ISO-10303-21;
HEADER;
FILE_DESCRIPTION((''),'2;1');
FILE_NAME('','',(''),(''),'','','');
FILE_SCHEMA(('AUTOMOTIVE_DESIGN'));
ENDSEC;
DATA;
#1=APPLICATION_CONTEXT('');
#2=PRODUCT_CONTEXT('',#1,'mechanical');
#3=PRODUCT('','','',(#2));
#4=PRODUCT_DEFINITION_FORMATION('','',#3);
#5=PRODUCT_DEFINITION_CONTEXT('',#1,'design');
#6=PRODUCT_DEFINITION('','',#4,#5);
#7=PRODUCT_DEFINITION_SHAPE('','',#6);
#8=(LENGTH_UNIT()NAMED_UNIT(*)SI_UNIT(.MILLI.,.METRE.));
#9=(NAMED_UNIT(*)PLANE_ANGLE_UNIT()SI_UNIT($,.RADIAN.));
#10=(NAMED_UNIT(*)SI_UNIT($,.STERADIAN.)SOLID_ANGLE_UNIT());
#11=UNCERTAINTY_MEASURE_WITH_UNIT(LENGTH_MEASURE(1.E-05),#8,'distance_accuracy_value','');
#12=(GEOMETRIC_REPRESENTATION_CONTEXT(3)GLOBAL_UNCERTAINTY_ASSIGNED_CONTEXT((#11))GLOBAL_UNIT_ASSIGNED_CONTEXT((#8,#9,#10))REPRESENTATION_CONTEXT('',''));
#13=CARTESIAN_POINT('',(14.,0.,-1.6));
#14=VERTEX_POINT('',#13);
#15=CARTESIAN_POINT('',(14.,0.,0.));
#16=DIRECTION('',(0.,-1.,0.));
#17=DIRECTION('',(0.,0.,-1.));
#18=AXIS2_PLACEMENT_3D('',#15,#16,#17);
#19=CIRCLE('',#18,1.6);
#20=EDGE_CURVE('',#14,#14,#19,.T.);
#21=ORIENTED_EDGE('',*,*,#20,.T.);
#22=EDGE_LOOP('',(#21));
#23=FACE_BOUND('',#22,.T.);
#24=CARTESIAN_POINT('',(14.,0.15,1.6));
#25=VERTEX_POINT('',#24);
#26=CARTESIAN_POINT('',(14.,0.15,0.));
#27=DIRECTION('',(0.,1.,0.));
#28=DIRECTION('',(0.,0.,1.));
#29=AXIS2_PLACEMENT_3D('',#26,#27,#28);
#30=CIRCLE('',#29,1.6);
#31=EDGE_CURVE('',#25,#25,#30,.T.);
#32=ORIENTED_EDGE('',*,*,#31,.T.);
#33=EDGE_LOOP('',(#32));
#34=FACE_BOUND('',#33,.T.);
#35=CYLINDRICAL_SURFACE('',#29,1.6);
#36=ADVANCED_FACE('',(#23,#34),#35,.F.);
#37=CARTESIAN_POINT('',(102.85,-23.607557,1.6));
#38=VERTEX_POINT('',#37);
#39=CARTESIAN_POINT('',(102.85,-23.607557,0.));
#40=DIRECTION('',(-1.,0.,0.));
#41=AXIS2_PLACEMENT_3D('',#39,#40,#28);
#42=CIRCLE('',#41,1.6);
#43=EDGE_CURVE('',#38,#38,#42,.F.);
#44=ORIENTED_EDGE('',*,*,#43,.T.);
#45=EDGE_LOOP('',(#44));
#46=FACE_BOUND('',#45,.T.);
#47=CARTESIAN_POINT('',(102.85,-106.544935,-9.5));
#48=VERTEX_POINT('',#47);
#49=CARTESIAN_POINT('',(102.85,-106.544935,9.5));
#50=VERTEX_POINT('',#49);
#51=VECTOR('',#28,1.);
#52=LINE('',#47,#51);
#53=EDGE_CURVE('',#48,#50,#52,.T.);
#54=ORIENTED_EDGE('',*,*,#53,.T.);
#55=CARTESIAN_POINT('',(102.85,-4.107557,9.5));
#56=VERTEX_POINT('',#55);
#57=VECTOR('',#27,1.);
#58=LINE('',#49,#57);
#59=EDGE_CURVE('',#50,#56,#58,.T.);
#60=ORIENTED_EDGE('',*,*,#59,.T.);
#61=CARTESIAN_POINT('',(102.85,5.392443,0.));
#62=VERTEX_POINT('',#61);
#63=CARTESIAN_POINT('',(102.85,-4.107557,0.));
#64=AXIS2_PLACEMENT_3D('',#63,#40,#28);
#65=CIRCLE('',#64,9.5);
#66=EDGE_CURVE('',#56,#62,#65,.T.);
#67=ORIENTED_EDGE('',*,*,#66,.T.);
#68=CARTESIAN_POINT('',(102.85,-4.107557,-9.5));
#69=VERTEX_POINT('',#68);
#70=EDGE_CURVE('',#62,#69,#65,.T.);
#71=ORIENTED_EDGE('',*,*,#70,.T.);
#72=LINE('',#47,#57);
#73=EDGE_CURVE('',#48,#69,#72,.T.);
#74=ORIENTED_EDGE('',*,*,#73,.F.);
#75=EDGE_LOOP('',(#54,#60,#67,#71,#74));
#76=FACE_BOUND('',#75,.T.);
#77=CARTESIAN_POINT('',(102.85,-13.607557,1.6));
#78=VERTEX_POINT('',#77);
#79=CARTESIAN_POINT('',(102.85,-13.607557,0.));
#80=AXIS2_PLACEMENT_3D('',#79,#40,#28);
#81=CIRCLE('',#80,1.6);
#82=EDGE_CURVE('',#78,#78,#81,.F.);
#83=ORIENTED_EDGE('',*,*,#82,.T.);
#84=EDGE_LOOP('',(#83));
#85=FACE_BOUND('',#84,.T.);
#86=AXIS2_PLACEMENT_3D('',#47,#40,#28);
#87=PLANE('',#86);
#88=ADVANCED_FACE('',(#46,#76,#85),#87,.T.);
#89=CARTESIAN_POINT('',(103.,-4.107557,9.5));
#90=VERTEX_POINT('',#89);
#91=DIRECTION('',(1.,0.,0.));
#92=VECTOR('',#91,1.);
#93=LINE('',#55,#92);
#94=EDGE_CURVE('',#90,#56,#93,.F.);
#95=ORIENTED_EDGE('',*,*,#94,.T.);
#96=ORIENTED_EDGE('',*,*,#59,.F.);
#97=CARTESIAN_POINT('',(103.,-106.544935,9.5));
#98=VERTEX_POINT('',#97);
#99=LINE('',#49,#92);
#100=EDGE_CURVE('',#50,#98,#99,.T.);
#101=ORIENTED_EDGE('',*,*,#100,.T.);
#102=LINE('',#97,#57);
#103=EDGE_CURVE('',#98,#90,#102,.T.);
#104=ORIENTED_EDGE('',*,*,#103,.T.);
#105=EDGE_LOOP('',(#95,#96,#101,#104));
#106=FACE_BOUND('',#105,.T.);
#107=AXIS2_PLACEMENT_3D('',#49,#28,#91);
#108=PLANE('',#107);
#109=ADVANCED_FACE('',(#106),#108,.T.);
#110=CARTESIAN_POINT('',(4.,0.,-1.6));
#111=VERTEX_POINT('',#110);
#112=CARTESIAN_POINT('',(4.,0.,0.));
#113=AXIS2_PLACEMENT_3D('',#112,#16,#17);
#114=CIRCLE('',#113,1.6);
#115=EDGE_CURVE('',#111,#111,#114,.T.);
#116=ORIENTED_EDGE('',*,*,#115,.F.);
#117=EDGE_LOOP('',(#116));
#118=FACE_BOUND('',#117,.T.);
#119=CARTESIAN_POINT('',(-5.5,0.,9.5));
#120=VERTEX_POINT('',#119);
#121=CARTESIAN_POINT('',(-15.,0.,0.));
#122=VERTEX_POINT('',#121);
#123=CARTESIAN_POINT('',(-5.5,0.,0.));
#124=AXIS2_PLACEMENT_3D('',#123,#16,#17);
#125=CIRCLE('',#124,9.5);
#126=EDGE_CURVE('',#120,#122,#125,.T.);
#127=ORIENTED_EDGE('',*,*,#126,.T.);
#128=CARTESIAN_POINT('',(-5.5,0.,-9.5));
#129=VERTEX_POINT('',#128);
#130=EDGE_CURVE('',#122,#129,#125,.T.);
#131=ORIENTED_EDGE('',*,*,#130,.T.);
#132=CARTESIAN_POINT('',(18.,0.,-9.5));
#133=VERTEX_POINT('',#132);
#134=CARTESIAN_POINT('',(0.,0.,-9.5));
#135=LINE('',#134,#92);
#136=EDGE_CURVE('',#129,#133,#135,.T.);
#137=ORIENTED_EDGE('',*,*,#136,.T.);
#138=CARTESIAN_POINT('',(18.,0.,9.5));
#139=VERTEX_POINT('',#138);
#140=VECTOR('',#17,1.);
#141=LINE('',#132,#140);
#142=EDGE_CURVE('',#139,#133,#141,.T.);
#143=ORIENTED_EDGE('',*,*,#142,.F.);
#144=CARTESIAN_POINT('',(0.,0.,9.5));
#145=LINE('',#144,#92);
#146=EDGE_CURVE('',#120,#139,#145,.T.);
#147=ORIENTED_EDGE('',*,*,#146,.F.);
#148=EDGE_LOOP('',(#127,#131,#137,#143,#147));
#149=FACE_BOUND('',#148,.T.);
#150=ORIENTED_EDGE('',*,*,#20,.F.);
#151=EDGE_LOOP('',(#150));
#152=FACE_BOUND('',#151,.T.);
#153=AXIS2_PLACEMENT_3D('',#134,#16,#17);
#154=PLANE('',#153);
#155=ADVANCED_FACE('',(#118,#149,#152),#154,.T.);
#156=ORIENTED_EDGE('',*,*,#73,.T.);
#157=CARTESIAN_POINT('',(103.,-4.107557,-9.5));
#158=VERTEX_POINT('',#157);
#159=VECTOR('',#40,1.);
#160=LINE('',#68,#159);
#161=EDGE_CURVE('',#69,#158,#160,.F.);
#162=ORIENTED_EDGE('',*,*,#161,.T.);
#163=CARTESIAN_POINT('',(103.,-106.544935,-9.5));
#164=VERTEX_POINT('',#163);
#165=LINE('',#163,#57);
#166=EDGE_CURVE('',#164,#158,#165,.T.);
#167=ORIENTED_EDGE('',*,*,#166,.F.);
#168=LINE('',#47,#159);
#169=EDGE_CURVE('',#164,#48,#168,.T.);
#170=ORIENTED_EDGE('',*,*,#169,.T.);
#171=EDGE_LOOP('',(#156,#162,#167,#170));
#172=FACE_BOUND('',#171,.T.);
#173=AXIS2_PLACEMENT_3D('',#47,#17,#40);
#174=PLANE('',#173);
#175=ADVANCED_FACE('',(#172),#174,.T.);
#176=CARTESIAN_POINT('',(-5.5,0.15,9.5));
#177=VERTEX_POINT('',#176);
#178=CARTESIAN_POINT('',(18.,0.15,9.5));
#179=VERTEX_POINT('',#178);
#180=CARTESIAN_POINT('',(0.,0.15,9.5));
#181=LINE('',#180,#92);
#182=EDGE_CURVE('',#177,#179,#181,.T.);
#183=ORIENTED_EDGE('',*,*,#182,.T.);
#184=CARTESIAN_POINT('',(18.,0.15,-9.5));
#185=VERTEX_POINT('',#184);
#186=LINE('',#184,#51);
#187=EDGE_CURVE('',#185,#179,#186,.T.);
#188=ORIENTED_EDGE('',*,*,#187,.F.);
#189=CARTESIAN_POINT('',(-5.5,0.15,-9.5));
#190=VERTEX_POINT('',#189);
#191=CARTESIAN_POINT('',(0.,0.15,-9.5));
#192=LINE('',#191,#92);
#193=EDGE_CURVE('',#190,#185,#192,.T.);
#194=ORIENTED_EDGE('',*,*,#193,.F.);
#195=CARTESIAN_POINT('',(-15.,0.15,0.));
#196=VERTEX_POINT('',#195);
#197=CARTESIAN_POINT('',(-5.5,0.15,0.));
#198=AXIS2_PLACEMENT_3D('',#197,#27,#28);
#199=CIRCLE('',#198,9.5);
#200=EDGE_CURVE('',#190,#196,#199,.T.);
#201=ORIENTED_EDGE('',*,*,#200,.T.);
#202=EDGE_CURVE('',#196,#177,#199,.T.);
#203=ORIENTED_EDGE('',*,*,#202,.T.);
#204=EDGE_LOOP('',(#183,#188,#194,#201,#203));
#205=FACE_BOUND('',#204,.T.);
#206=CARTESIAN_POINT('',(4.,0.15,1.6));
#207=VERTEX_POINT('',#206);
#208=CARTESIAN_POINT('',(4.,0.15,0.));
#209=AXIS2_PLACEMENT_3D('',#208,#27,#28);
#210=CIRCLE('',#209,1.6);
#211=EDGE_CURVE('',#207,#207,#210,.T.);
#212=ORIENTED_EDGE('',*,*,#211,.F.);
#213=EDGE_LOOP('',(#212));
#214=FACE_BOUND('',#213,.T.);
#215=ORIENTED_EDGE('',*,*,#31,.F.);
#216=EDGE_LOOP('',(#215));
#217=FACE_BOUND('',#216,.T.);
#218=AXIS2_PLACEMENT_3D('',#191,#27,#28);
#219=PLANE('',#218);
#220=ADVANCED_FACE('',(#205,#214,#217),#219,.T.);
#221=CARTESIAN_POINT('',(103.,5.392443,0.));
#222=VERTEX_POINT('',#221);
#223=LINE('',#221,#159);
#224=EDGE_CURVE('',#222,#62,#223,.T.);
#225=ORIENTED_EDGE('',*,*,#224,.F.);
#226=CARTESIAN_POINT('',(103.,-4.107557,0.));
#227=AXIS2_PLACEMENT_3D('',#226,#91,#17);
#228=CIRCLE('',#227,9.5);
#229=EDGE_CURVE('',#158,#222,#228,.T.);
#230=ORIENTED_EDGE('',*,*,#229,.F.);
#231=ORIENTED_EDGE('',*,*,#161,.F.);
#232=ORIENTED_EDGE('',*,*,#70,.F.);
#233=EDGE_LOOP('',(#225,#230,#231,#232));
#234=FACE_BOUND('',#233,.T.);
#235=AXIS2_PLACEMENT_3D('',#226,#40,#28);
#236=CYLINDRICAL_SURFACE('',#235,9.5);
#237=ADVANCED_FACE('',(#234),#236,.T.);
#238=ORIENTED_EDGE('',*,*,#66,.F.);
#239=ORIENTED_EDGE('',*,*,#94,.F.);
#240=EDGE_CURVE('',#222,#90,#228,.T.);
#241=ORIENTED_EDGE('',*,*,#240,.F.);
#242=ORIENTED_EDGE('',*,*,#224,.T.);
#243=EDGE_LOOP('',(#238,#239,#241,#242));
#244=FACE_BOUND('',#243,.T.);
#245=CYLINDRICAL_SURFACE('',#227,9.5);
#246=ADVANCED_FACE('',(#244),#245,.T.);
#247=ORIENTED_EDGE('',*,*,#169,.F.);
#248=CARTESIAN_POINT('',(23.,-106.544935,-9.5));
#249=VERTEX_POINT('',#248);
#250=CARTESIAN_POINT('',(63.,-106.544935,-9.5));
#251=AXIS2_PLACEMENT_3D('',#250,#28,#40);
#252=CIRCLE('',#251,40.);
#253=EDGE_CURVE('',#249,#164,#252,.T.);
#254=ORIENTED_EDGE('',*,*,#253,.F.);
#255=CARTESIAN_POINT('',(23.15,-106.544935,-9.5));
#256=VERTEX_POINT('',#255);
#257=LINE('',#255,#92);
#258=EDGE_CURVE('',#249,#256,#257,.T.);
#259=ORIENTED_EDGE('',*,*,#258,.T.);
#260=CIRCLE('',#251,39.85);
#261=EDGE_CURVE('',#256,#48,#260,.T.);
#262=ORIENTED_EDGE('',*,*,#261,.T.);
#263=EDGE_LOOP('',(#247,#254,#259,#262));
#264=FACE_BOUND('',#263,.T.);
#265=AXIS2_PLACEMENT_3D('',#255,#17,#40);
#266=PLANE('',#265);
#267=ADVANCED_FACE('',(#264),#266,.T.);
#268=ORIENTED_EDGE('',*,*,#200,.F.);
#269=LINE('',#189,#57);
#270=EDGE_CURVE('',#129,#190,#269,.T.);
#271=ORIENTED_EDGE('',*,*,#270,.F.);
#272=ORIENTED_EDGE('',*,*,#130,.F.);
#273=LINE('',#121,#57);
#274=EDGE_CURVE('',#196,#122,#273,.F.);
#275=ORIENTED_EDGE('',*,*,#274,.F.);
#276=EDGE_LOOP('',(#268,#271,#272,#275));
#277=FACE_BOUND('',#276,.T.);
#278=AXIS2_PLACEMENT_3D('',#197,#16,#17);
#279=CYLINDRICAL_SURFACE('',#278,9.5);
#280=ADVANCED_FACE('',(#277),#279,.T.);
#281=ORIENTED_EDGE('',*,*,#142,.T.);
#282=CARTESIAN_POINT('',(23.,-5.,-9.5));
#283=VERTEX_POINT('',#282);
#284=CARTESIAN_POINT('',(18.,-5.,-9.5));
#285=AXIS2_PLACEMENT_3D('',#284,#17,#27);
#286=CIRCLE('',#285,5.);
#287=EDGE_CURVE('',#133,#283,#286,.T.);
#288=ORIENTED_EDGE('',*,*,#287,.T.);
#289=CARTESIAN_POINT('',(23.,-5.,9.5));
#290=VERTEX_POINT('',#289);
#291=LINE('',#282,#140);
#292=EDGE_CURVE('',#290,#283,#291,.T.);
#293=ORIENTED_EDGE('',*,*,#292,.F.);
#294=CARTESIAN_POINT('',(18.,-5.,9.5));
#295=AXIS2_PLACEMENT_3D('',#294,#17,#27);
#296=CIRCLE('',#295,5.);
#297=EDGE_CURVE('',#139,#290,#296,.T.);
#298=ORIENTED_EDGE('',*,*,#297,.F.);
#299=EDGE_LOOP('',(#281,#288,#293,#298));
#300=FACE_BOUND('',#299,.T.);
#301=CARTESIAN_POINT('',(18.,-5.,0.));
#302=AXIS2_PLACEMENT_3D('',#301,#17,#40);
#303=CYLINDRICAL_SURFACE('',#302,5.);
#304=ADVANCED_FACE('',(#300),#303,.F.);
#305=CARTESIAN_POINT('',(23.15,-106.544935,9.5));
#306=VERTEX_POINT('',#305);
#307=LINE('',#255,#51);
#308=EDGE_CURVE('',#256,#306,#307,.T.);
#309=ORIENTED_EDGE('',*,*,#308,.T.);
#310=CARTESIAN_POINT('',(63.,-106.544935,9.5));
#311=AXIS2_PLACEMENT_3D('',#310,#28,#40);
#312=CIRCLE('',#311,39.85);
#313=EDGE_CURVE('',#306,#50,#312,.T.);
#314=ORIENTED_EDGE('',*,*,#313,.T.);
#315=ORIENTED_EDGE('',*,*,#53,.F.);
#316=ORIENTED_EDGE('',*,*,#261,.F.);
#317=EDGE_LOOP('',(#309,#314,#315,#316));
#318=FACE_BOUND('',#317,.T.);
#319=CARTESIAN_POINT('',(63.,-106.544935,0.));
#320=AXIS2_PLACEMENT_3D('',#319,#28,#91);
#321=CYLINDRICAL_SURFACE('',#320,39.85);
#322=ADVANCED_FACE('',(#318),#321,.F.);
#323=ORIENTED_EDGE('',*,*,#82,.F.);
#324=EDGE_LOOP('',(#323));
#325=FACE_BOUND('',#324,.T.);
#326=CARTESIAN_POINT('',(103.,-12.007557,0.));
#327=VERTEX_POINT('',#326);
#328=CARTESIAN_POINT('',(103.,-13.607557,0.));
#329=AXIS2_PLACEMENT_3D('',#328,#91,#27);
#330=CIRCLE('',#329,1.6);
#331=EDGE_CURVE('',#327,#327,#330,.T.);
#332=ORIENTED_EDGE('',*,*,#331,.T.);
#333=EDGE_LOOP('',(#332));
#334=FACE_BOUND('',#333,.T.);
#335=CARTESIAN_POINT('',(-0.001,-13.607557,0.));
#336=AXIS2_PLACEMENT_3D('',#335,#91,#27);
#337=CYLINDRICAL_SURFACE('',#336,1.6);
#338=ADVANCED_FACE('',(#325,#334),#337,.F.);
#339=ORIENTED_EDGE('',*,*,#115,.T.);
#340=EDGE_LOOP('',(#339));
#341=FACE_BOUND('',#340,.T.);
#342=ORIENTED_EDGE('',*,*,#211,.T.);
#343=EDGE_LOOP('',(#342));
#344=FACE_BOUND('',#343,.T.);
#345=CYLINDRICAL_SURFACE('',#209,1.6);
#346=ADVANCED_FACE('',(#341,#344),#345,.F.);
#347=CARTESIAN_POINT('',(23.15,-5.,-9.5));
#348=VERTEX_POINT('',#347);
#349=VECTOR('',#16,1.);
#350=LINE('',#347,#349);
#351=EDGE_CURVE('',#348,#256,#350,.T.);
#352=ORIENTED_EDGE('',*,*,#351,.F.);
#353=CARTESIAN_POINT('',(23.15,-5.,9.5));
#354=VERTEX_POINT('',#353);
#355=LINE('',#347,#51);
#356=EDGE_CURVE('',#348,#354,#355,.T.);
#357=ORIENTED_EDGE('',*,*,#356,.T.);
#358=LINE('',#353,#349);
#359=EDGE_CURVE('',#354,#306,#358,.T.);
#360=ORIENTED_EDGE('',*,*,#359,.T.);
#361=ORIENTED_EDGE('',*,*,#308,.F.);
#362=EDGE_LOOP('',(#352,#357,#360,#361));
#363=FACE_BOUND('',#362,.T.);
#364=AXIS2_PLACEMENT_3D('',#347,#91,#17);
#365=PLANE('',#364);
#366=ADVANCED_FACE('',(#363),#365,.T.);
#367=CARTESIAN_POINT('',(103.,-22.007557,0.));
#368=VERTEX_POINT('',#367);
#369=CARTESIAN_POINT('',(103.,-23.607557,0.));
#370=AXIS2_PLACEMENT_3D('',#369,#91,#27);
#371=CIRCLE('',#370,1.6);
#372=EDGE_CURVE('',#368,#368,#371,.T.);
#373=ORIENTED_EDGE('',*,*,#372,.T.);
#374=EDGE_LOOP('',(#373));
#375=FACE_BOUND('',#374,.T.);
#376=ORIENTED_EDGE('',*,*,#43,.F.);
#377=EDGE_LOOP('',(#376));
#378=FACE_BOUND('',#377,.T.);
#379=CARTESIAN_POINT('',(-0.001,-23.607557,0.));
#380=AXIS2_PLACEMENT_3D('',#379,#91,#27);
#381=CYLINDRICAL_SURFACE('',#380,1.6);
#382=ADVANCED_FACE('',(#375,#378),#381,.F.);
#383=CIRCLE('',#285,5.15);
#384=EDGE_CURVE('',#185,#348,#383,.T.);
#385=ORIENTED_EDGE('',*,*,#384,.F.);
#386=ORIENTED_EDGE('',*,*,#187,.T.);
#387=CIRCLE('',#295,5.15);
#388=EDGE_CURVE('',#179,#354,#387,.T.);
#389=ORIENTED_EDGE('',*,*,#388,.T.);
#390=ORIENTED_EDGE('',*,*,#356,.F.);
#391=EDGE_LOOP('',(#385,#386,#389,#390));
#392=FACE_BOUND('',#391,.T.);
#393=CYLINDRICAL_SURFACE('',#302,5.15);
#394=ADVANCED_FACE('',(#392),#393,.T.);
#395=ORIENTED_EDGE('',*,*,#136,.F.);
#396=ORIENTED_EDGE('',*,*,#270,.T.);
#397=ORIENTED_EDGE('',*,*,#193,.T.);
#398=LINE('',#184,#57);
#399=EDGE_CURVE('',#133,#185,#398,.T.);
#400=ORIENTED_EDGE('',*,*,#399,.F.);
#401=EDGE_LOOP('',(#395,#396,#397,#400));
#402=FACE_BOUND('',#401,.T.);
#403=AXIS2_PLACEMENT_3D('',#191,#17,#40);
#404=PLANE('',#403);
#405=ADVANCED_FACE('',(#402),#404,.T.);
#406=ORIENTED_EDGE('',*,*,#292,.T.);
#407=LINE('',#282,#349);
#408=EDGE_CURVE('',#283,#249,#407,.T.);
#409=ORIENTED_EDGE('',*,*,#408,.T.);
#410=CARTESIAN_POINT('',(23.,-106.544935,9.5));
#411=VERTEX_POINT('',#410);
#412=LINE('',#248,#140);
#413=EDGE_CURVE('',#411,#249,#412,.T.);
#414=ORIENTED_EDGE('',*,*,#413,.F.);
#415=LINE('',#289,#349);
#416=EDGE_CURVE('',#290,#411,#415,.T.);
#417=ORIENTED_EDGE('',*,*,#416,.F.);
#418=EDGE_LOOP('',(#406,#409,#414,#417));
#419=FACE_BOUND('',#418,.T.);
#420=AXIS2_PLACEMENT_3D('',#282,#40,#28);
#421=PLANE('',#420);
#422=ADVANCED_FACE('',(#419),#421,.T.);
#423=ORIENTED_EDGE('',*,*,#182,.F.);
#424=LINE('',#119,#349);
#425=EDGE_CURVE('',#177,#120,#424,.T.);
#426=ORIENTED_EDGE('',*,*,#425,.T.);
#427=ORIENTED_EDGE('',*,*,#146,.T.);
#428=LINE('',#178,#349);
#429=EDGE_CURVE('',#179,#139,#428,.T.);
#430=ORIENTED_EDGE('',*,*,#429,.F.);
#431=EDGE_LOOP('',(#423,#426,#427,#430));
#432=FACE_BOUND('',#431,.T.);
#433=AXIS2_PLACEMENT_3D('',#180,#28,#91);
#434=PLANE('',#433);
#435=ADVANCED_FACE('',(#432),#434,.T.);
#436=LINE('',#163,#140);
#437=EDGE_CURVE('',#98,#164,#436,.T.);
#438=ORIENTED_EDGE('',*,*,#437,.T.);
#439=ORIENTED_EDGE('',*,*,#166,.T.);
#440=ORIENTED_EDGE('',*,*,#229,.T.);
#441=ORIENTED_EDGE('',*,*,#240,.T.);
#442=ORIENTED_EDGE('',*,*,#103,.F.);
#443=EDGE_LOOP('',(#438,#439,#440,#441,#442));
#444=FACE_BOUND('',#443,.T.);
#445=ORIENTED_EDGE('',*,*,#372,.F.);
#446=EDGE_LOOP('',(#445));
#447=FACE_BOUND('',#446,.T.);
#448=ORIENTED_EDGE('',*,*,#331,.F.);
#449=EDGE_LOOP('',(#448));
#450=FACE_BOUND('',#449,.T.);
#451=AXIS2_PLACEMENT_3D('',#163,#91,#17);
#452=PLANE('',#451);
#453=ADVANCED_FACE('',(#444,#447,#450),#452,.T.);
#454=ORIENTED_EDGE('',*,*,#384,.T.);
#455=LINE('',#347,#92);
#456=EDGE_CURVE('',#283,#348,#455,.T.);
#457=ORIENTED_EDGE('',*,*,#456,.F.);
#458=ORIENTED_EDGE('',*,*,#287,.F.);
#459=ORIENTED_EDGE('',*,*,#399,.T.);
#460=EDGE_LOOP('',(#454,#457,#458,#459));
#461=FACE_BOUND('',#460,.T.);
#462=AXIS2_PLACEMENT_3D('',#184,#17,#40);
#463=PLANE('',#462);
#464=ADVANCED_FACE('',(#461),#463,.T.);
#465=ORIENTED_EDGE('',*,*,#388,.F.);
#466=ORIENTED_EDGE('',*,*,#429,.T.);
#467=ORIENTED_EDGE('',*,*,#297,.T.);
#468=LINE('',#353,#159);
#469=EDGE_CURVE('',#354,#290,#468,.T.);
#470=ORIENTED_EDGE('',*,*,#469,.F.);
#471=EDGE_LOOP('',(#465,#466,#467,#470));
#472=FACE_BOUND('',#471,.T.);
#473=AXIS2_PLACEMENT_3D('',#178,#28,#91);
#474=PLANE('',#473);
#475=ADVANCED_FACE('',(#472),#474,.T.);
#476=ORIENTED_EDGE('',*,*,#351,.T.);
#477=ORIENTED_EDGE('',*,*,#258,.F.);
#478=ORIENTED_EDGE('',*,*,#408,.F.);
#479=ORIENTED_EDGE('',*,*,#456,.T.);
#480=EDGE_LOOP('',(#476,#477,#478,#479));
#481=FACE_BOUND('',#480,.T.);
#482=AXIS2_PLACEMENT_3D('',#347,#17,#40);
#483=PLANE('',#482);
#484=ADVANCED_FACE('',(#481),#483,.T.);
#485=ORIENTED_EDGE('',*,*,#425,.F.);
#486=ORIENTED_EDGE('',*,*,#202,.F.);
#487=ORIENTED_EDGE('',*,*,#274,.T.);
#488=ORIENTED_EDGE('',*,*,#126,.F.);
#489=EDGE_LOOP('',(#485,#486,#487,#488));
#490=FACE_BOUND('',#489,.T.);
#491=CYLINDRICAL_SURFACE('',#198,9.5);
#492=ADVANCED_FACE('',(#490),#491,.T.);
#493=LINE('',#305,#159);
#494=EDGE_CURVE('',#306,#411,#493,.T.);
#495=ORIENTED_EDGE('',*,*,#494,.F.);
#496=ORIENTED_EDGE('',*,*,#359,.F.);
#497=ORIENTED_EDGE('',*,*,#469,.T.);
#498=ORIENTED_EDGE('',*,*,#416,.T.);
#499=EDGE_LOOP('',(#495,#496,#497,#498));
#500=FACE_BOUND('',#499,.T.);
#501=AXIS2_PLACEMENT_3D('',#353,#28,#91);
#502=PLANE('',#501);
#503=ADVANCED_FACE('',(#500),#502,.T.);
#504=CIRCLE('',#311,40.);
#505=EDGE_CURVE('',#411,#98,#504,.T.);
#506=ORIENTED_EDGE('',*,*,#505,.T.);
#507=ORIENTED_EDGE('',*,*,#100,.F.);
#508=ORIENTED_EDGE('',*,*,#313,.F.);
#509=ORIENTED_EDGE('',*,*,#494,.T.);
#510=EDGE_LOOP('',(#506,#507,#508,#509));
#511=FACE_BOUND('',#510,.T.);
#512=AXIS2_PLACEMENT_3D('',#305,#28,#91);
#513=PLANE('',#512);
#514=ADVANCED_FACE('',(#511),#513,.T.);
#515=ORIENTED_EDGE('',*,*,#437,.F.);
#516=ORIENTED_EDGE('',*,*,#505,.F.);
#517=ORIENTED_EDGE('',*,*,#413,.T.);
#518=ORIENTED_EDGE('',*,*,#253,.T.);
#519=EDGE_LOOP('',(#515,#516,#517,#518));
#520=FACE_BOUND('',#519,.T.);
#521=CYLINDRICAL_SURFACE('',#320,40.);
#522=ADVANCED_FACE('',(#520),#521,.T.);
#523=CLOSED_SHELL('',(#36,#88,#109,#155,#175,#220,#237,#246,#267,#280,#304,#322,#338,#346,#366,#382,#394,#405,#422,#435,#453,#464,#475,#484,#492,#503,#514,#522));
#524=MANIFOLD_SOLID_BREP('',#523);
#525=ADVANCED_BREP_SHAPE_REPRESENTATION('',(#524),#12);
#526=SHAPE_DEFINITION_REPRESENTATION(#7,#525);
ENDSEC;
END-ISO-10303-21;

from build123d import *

# Parameters (mm, degrees)
SKETCH2_W            = 19
SKETCH2_H            = 0.15
M3_CLEARANCE_HOLE1_D = 3.2
CUT_EXTRUDE1_REACH   = 181.373
SKETCH5_R            = 1.6
MOVE_FACE1_BY        = 15
MOVE_FACE1_2_BY      = 15
FILLET1_R            = 9.5


with BuildPart() as part:
    # Sweep1: sweep along a path in tape_measure_path
    with BuildLine(Plane.XY) as sweep1_path:
        Line((0, 0), (18, 0))
        ThreePointArc((18, 0), (21.535533906, -1.464466094), (23, -5))
        Line((23, -5), (23, -106.544934808))
        ThreePointArc((23, -106.544934808), (63, -146.544934808), (103, -106.544934808))
        Line((103, -106.544934808), (103, -9.607557393))
    # Sketch2 → Sweep1 (sweep)
    with BuildSketch(Plane(origin=(0, 0, 0), x_dir=(0, 0, -1), z_dir=(1, 0, 0))):
        with Locations((0, 0.075)):
            Rectangle(SKETCH2_W, SKETCH2_H)
    sweep(path=sweep1_path.line)

    # M3 Clearance Hole1 (through all)
    with Locations(Plane(origin=(0, 0.15, 0), x_dir=(1, 0, 0), z_dir=(0, 1, 0))):
        with Locations((4, 0), (14, 0)):
            Hole(M3_CLEARANCE_HOLE1_D / 2)

    # Sketch5 → Cut-Extrude1 (cut, up to next)
    with BuildSketch(Plane(origin=(103, 0, 0), x_dir=(0, 0, -1), z_dir=(1, 0, 0)), mode=Mode.PRIVATE) as cut_extrude1_sk1:
        with Locations(Location((0, -13.607557393, 0), (0, 0, 90))):
            Circle(SKETCH5_R)
    cut_extrude1_tool1 = extrude(cut_extrude1_sk1.sketch, amount=-CUT_EXTRUDE1_REACH, mode=Mode.PRIVATE) & part.part
    # Sketch5 → Cut-Extrude1 (cut, up to next)
    with BuildSketch(Plane(origin=(103, 0, 0), x_dir=(0, 0, -1), z_dir=(1, 0, 0)), mode=Mode.PRIVATE) as cut_extrude1_sk2:
        with Locations(Location((0, -23.607557393, 0), (0, 0, 90))):
            Circle(SKETCH5_R)
    cut_extrude1_tool2 = extrude(cut_extrude1_sk2.sketch, amount=-CUT_EXTRUDE1_REACH, mode=Mode.PRIVATE) & part.part
    add(cut_extrude1_tool1.solids().sort_by_distance((103, -13.607557, 0))[0], mode=Mode.SUBTRACT)
    add(cut_extrude1_tool2.solids().sort_by_distance((103, -23.607557, 0))[0], mode=Mode.SUBTRACT)

    # Move Face1: a face moved outward by 15.0
    extrude(part.faces().sort_by_distance((102.925, -9.607557393, 0))[0], amount=MOVE_FACE1_BY, dir=(0, 1, 0))

    # Move Face1 2: a face moved outward by 15.0
    extrude(part.faces().sort_by_distance((0, 0.075, 0))[0], amount=MOVE_FACE1_2_BY, dir=(-1, 0, 0))

    # Fillet1
    fillet1_edges = [part.edges().sort_by_distance(p)[0] for p in [
        (-15, 0.075, 9.5),
        (-15, 0.075, -9.5),
        (102.925, 5.392442607, 9.5),
        (102.925, 5.392442607, -9.5),
    ]]
    fillet(fillet1_edges, radius=FILLET1_R - 0.0001)  # a hair under: the kernel refuses the full size


solid = part.part
